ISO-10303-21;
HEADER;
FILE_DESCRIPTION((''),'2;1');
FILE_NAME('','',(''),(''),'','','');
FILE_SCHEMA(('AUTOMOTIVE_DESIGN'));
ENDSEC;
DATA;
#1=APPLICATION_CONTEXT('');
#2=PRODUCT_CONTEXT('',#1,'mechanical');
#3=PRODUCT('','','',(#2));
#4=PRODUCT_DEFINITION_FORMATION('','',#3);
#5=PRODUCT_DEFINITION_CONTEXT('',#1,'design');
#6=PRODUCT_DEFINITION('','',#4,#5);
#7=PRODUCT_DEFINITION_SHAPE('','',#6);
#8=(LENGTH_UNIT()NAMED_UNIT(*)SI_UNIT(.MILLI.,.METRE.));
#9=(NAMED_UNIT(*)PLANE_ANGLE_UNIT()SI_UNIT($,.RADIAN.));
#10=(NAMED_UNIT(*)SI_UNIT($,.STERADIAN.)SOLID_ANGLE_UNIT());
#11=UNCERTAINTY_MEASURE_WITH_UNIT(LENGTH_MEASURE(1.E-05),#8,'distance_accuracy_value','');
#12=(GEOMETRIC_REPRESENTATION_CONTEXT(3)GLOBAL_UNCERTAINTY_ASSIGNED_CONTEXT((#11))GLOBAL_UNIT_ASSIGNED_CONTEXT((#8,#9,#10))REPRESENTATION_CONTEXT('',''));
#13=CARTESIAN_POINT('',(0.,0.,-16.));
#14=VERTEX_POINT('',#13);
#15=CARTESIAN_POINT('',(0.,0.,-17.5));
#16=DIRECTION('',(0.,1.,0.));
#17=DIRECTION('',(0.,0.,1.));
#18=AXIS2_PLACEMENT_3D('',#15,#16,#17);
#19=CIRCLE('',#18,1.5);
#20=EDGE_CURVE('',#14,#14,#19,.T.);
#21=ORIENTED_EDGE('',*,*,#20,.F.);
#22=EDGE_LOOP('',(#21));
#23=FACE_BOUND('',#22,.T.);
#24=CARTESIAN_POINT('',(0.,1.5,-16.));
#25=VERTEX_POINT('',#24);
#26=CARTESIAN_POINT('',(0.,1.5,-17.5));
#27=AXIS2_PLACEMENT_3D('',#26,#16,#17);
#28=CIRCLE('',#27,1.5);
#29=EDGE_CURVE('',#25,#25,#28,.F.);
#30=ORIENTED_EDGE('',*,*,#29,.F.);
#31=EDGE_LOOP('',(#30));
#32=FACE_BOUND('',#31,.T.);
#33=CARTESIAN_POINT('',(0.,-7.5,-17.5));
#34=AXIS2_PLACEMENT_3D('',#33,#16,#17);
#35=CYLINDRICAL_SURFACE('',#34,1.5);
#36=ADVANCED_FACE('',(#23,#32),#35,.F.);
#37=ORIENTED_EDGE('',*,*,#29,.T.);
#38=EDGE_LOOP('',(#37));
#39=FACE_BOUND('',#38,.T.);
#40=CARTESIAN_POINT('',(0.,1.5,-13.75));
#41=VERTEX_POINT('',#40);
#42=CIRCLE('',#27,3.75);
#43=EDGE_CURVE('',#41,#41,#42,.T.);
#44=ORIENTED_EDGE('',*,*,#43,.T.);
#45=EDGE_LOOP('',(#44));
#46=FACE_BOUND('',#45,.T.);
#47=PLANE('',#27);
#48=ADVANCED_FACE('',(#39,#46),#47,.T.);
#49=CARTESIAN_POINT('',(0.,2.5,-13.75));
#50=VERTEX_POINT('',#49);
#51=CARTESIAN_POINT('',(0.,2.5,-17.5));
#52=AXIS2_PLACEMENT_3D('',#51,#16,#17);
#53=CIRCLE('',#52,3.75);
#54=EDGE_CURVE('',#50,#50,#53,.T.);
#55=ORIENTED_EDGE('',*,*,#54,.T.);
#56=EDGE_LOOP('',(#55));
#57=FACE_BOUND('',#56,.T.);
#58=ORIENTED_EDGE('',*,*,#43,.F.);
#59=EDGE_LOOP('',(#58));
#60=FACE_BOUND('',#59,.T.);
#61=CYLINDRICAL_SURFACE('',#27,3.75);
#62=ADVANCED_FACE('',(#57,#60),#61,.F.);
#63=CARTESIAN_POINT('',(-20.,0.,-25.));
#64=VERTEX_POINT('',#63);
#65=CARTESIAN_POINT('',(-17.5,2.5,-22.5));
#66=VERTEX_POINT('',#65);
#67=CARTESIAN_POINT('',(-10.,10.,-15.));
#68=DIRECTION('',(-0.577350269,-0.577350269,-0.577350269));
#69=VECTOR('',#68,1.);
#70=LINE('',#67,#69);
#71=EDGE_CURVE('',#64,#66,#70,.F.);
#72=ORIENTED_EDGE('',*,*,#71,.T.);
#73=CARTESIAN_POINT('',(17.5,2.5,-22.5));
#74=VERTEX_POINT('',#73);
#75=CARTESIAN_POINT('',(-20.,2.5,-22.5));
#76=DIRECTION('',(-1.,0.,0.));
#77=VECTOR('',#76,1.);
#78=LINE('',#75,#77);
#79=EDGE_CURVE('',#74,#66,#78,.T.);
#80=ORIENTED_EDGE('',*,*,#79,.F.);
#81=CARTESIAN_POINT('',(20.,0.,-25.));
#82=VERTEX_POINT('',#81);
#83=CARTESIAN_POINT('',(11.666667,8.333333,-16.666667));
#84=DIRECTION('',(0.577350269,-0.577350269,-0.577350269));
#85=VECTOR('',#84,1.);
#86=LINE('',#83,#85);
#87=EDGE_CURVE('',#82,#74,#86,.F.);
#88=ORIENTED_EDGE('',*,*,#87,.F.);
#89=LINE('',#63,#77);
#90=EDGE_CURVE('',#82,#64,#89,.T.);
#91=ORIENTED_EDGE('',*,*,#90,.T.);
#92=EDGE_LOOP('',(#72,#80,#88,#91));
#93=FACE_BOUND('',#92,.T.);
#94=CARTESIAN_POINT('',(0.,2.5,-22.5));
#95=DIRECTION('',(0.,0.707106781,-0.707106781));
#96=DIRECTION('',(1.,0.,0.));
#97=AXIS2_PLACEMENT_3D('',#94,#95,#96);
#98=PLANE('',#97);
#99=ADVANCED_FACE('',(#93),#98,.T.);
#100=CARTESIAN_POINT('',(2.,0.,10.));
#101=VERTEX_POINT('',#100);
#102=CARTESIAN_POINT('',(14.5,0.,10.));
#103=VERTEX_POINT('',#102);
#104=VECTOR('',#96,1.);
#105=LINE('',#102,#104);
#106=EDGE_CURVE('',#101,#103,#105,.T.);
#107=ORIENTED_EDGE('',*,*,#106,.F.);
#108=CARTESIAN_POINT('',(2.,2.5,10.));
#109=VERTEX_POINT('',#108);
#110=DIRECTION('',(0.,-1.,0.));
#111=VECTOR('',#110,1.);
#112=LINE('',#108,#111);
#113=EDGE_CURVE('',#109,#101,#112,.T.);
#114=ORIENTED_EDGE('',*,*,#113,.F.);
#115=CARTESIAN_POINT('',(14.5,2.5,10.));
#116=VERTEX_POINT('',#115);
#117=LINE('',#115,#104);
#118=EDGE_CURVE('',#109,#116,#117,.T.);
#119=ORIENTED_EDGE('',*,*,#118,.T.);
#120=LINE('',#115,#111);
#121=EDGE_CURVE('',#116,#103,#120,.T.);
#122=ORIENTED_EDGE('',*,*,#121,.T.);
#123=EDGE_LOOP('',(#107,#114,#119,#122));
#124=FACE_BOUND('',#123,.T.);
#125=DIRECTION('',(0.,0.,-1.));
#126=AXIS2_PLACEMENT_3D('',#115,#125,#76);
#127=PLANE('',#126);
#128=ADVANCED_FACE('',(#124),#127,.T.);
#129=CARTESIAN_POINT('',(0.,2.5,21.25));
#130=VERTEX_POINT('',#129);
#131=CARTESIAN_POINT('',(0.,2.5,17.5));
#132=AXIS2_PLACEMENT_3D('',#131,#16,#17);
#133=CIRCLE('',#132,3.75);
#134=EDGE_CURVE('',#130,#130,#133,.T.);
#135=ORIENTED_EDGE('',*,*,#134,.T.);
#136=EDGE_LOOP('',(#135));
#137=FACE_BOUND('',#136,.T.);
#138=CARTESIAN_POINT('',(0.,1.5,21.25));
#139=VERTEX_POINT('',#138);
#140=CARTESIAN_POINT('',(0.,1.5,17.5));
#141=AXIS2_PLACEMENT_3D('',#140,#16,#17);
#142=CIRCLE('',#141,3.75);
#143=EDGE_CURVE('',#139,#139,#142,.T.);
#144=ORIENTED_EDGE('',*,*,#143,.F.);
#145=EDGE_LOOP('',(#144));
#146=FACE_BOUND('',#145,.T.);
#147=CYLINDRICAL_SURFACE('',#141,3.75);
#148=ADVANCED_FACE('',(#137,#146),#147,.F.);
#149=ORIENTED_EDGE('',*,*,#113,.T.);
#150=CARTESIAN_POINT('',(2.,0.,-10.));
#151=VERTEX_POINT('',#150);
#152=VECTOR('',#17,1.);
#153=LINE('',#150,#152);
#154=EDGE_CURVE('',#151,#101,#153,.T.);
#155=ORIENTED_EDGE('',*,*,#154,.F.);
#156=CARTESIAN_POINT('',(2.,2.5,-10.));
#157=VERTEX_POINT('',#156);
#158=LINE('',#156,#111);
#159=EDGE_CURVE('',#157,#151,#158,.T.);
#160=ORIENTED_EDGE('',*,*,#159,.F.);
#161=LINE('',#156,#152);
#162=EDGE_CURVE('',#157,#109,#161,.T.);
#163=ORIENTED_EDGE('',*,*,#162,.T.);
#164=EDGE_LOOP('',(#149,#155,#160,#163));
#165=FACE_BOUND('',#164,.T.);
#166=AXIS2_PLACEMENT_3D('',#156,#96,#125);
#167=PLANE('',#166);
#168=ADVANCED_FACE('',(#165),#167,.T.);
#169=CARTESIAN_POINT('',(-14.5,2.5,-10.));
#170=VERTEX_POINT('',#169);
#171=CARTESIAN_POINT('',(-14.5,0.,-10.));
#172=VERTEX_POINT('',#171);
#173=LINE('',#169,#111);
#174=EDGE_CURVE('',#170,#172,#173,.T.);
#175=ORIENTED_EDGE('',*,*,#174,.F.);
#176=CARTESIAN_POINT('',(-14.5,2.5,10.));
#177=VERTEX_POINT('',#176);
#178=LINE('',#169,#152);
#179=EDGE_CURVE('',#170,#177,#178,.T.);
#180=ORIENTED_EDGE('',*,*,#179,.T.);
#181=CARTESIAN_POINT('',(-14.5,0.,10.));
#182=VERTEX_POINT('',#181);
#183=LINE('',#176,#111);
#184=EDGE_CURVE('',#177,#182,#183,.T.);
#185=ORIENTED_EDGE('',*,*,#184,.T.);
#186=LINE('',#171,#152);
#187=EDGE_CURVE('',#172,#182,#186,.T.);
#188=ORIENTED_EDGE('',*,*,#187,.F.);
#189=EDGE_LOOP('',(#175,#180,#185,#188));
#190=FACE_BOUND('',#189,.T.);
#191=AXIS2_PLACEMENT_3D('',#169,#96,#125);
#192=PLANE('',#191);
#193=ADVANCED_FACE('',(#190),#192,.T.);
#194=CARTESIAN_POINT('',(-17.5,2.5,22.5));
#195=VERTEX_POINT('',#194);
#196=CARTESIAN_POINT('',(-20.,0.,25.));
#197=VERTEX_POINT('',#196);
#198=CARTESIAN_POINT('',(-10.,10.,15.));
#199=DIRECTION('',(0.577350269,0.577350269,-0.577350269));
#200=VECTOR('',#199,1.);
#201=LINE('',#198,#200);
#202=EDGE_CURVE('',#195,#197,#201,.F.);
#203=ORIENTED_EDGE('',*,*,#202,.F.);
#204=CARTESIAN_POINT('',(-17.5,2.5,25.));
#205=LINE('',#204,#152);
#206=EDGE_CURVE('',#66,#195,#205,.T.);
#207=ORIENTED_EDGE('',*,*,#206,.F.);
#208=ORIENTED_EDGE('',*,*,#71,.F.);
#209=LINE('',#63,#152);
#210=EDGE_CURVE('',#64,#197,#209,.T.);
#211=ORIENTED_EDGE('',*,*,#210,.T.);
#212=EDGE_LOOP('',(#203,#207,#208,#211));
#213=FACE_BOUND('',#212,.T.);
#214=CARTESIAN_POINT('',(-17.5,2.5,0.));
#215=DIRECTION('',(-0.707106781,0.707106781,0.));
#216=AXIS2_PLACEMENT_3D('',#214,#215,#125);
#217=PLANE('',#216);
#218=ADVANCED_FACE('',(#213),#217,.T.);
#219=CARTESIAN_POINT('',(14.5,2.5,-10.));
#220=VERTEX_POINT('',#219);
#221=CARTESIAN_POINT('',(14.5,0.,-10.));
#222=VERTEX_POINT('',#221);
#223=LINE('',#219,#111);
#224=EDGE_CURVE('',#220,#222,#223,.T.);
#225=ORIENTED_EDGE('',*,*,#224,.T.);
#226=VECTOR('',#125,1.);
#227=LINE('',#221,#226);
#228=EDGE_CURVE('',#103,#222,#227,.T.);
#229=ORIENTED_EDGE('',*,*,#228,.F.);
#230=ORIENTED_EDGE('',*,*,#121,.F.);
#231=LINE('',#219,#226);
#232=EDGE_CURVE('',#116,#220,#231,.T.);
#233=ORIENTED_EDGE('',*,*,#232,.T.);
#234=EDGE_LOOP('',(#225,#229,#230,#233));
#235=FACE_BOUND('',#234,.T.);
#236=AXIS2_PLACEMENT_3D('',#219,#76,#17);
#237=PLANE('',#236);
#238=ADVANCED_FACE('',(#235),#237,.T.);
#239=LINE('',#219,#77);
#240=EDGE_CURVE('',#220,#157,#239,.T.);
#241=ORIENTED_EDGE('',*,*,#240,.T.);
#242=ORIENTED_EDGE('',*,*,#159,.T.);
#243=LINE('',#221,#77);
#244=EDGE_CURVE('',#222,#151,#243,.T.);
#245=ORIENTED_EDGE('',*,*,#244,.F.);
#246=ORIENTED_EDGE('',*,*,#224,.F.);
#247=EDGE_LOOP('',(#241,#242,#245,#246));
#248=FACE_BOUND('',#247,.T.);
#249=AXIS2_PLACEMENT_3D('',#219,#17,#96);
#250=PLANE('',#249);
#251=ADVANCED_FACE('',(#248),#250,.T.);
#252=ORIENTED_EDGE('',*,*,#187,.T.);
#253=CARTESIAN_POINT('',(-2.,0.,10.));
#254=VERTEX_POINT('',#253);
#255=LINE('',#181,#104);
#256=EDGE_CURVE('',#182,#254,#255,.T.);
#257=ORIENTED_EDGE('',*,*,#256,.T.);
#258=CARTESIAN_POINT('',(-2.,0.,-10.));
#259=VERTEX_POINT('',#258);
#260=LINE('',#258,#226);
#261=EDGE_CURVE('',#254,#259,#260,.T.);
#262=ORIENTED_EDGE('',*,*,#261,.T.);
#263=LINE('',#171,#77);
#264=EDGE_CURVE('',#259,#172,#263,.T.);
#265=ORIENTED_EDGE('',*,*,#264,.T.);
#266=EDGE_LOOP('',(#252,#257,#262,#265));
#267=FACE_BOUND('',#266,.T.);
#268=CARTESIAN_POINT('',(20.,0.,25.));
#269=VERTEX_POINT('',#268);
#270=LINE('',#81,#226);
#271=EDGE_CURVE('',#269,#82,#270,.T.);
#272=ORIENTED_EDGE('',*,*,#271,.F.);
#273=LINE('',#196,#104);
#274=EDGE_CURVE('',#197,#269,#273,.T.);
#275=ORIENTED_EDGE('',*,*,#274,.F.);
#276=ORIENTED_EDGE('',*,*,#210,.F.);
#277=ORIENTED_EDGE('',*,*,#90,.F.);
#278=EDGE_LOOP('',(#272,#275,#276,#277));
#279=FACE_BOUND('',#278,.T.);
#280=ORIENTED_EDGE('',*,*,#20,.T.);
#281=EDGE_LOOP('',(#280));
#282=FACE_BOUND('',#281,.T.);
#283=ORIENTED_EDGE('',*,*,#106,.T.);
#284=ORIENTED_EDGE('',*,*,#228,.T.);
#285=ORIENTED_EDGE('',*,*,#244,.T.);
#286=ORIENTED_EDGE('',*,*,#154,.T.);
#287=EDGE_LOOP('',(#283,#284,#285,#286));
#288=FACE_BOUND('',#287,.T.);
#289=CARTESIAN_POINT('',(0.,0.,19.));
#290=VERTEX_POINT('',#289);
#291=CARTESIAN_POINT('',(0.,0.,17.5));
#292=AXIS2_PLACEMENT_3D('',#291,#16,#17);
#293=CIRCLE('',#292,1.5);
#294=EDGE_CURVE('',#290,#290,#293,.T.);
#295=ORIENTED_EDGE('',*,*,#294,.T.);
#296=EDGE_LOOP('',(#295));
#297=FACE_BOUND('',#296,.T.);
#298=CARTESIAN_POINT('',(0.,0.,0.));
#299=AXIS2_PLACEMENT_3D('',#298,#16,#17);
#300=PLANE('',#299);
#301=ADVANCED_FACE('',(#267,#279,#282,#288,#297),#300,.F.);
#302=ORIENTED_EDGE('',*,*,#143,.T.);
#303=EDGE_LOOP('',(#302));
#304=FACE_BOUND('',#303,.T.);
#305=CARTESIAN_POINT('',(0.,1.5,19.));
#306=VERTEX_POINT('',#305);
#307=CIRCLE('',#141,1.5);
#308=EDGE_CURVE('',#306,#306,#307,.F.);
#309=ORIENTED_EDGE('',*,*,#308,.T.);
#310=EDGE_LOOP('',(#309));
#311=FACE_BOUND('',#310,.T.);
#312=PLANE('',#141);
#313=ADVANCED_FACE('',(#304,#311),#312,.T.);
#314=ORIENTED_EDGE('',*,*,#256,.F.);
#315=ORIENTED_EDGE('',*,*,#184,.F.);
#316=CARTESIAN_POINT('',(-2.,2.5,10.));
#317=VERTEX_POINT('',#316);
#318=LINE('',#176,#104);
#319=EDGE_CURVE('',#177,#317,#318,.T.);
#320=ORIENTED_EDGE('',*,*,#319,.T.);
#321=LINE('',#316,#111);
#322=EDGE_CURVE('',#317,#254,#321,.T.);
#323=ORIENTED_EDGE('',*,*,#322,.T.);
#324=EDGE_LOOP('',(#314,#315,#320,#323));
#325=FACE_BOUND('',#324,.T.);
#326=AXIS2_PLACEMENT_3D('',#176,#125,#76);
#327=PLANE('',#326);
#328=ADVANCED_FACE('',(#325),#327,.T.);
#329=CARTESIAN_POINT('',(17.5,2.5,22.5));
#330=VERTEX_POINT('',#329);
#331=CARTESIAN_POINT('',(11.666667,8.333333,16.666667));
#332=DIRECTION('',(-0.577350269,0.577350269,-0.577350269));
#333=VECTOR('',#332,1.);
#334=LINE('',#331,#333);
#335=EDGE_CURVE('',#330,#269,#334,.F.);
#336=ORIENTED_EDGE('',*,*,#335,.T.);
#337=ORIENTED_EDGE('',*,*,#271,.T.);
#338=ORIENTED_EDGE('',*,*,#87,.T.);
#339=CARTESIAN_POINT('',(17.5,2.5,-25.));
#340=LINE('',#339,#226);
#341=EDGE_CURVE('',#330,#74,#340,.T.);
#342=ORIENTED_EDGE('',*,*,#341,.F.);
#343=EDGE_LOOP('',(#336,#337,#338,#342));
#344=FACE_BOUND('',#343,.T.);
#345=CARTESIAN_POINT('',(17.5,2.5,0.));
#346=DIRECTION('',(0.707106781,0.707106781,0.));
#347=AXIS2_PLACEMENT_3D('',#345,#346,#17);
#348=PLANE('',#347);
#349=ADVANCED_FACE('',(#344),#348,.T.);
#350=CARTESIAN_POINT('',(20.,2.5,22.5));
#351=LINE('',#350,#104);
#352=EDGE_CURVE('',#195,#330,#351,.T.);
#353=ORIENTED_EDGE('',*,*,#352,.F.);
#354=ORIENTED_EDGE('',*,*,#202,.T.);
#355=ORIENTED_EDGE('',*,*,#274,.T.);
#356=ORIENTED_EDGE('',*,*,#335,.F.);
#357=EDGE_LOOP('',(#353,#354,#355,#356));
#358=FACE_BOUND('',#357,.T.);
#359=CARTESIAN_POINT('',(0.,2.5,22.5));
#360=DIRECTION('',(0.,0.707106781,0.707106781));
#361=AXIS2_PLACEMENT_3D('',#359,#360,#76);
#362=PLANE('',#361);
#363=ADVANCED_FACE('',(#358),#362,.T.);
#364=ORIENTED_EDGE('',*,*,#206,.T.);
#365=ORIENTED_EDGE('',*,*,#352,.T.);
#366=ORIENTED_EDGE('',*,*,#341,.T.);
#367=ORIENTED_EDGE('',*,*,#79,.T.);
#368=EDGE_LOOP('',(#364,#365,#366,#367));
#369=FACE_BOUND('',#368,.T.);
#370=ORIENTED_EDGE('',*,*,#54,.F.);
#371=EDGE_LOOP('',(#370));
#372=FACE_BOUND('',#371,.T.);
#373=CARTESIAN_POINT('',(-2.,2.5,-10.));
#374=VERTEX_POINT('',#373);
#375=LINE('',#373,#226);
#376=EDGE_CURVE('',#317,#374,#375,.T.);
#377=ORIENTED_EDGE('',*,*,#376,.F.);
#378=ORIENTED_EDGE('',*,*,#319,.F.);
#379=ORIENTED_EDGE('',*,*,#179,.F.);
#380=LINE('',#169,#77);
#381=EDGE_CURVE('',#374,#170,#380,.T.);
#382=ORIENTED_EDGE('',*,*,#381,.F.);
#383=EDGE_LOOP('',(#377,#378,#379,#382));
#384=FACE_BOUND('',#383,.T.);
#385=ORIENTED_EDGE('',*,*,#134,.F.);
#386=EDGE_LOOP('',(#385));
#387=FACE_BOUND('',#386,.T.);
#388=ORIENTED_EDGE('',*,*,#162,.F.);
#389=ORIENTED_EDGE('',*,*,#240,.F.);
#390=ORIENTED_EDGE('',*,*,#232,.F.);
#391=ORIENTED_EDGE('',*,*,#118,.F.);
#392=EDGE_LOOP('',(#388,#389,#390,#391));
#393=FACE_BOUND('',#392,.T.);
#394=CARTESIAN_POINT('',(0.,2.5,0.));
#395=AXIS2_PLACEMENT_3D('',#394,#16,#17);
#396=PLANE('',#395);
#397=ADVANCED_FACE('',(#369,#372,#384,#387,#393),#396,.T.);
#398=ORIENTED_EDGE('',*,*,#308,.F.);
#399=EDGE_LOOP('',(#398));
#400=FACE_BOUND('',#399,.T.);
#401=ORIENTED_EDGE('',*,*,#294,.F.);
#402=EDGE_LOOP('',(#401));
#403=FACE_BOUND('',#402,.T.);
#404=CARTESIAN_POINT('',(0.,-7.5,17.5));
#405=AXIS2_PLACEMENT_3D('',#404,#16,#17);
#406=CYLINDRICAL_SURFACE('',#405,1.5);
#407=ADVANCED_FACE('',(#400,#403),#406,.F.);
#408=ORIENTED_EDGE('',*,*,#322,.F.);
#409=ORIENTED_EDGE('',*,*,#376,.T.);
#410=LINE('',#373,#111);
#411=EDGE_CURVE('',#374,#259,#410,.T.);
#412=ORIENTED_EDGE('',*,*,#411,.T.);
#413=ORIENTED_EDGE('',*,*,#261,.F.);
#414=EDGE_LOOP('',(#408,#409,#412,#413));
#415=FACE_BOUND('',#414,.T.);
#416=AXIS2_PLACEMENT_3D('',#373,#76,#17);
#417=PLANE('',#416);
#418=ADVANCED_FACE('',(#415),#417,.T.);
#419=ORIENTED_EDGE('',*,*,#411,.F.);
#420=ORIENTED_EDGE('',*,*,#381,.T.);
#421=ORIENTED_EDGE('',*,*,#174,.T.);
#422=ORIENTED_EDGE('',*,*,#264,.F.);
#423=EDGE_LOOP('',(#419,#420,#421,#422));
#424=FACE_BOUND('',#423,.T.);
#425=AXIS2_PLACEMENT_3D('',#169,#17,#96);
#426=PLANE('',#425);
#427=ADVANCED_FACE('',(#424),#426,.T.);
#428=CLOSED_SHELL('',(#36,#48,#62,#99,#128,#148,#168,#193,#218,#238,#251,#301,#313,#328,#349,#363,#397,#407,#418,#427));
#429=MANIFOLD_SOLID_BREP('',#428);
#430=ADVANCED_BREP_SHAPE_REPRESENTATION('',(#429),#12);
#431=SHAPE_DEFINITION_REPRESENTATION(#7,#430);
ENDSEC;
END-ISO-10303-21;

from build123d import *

# Parameters (mm, degrees)
SKETCH1_W           = 40
SKETCH1_H           = 50
SKETCH1_W_2         = 12.5
SKETCH1_H_2         = 20
BOSS_EXTRUDE1_DEPTH = 2.5
SKETCH2_R           = 1.5
CUT_EXTRUDE1_DEPTH  = 10
SKETCH3_R           = 3.75
CUT_EXTRUDE2_DEPTH  = 1
CHAMFER1_SIZE       = 2.5


with BuildPart() as part:
    # Sketch1 → Boss-Extrude1 (new body)
    with BuildSketch(Plane(origin=(0, 0, 0), x_dir=(1, 0, 0), z_dir=(0, 1, 0))):
        Rectangle(SKETCH1_W, SKETCH1_H)
        with Locations((-8.25, 0)):
            Rectangle(SKETCH1_W_2, SKETCH1_H_2, mode=Mode.SUBTRACT)
        with Locations((8.25, 0)):
            Rectangle(SKETCH1_W_2, SKETCH1_H_2, mode=Mode.SUBTRACT)
    extrude(amount=BOSS_EXTRUDE1_DEPTH)

    # Sketch2 → Cut-Extrude1 (cut)
    with BuildSketch(Plane(origin=(0, 2.5, 0), x_dir=(1, 0, 0), z_dir=(0, 1, 0))):
        with Locations(Location((0, 17.5, 0), (0, 0, 270))):
            Circle(SKETCH2_R)
        with Locations(Location((0, -17.5, 0), (0, 0, 270))):
            Circle(SKETCH2_R)
    extrude(amount=-CUT_EXTRUDE1_DEPTH, mode=Mode.SUBTRACT)

    # Sketch3 → Cut-Extrude2 (cut)
    with BuildSketch(Plane(origin=(0, 2.5, 0), x_dir=(1, 0, 0), z_dir=(0, 1, 0))):
        with Locations(Location((0, 17.5, 0), (0, 0, 270))):
            Circle(SKETCH3_R)
        with Locations(Location((0, -17.5, 0), (0, 0, 270))):
            Circle(SKETCH3_R)
    extrude(amount=-CUT_EXTRUDE2_DEPTH, mode=Mode.SUBTRACT)

    # Chamfer1
    chamfer1_edges = [part.edges().sort_by_distance(p)[0] for p in [
        (20, 2.5, 0),
        (0, 2.5, 25),
        (0, 2.5, -25),
        (-20, 2.5, 0),
    ]]
    chamfer(chamfer1_edges, length=CHAMFER1_SIZE - 0.0001)  # a hair under: the kernel refuses the full size


solid = part.part
